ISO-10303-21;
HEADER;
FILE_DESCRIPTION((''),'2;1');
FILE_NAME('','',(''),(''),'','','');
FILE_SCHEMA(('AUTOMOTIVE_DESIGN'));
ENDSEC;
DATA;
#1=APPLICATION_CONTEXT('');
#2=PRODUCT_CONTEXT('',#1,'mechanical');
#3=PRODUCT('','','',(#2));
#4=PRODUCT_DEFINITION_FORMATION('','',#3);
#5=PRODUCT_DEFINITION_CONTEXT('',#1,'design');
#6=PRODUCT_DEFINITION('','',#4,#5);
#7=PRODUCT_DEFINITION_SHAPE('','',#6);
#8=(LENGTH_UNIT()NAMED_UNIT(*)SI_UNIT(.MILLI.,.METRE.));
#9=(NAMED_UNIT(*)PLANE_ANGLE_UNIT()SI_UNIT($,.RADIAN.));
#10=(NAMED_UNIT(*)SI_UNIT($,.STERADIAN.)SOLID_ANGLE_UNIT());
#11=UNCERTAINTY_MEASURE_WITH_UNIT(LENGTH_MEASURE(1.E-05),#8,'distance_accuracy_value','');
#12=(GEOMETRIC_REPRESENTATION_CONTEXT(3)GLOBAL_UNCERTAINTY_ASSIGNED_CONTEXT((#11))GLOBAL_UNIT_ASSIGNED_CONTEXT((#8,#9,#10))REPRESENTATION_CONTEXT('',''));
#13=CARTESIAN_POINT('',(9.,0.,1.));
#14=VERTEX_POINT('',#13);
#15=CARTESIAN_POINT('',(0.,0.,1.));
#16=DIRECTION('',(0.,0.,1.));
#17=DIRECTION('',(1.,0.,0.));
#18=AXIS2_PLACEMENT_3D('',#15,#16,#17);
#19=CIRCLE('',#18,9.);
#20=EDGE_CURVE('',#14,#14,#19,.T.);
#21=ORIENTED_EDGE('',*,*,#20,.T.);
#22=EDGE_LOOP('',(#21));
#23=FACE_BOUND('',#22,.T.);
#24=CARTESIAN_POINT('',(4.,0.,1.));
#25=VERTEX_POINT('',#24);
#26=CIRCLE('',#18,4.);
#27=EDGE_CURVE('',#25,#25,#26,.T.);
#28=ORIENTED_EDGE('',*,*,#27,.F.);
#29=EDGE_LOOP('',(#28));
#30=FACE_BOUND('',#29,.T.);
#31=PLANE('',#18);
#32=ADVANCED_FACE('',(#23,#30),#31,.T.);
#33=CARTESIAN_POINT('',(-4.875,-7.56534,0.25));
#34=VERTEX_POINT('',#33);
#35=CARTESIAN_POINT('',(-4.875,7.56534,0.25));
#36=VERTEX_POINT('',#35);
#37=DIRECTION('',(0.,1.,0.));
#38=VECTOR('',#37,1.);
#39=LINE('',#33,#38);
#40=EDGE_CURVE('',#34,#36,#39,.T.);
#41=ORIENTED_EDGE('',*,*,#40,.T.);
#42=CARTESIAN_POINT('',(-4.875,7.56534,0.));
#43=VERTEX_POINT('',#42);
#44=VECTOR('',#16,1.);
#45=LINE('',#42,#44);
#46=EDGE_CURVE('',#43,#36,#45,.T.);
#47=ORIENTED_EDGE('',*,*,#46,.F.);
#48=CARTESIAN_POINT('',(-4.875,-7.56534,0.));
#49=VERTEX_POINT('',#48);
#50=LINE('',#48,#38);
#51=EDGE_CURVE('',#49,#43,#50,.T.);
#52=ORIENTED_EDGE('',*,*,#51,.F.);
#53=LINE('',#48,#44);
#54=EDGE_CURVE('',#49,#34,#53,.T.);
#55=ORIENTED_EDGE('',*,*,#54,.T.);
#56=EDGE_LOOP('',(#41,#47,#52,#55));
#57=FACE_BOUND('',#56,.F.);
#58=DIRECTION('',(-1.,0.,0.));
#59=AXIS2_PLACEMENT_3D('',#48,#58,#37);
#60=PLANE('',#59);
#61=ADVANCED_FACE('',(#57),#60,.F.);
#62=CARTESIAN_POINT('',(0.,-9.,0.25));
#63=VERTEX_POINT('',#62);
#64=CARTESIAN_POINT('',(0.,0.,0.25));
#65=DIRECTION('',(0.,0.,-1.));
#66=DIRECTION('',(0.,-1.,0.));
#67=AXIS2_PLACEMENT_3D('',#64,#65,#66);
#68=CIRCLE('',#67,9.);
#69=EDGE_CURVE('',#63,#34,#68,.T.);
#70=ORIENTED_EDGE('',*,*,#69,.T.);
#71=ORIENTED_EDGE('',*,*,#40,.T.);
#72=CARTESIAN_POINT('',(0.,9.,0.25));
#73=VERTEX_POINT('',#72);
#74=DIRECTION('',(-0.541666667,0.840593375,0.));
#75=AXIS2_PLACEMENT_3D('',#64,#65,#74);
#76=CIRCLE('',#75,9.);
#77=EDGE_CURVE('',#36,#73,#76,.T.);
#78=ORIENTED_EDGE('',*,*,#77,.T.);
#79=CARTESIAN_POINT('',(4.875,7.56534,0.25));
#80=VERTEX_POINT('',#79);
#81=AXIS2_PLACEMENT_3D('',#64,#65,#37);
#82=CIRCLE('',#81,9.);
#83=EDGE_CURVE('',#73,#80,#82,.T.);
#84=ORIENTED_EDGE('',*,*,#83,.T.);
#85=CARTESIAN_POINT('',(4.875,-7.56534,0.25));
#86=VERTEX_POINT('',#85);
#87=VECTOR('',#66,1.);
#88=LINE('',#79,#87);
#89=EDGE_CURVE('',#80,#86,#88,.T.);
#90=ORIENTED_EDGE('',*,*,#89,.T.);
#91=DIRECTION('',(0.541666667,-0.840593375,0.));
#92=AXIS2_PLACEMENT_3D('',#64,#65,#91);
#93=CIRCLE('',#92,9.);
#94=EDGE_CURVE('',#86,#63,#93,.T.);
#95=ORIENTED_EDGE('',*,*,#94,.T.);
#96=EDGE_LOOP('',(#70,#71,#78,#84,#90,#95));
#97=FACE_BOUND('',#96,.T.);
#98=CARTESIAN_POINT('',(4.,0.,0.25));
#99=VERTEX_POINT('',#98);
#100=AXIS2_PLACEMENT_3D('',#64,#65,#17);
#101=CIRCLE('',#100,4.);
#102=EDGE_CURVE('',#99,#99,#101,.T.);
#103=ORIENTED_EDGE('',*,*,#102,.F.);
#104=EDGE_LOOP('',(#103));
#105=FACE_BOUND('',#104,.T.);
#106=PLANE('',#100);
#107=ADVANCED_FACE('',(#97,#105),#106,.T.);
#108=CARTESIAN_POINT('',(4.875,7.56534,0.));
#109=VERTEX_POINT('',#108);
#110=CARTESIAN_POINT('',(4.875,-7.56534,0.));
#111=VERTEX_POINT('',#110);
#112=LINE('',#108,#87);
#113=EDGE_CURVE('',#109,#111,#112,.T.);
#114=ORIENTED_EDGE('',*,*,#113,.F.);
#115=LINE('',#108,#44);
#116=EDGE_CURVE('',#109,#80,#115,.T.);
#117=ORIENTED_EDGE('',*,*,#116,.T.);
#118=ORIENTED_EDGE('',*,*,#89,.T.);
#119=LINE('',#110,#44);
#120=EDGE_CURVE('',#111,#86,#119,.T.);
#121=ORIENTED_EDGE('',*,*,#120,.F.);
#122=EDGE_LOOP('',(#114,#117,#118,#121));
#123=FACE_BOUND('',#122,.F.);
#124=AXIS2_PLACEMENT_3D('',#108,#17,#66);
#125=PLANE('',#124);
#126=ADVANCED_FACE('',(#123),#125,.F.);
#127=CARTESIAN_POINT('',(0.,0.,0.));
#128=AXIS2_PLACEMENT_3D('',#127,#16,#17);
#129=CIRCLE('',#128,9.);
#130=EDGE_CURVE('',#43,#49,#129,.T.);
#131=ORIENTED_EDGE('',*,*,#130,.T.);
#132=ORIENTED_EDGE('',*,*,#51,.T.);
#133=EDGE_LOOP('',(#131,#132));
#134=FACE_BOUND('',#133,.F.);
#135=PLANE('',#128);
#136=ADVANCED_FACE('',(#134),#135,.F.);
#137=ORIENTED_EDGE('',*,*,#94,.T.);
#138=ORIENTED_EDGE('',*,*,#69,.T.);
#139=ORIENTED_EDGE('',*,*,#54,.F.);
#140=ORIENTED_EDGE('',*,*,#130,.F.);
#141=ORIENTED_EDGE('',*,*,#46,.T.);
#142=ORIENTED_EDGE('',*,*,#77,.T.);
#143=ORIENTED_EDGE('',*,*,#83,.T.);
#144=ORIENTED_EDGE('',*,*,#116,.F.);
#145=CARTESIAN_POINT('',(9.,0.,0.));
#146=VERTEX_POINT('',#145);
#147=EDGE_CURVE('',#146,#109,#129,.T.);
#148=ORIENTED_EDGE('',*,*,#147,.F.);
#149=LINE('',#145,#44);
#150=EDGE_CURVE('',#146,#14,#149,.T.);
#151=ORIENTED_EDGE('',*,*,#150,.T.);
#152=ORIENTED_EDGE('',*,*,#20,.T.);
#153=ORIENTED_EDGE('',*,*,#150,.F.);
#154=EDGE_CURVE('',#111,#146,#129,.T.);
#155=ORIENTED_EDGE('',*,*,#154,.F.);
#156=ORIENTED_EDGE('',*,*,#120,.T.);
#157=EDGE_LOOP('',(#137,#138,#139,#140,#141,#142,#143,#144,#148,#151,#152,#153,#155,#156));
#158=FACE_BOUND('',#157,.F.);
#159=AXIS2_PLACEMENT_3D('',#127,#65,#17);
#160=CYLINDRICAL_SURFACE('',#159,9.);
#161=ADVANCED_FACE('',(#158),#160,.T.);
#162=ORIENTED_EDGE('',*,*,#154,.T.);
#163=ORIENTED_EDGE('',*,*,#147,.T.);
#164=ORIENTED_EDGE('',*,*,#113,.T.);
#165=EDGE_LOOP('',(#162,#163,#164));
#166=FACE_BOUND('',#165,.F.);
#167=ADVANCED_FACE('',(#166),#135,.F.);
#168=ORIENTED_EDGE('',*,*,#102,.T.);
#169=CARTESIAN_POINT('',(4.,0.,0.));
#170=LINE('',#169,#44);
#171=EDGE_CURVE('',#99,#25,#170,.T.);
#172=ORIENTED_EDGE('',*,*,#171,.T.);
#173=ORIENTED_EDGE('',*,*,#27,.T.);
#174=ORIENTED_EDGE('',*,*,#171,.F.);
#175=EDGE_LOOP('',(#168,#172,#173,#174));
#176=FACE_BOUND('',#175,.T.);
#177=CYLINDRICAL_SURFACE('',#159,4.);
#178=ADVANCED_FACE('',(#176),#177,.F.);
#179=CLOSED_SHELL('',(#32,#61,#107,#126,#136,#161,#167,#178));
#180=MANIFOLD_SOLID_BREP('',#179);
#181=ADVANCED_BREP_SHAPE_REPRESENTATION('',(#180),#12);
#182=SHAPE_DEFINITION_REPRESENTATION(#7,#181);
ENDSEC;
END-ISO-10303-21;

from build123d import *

# Parameters (mm, degrees)
F0_R     = 9
F0_R_2   = 4
F1_DEPTH = 1
F2_R     = 4
F3_DEPTH = 0.25


with BuildPart() as f1:
    # F0 (on Top) → F1 (new body)
    with BuildSketch(Plane.XY):
        Circle(F0_R)
        Circle(F0_R_2, mode=Mode.SUBTRACT)
    extrude(amount=F1_DEPTH)

    # F2 (on face) → F3 (cut)
    with BuildSketch(Plane(origin=(0, 0, 0), x_dir=(1, 0, 0), z_dir=(0, 0, -1))):
        with BuildLine():
            ThreePointArc((4.875, 7.5653403757), (2.5408597579, 8.6338885614), (0, 9))
            ThreePointArc((0, 9), (-2.5408597579, 8.6338885614), (-4.875, 7.5653403757))
            Line((-4.875, 7.5653403757), (-4.875, -7.5653403757))
            ThreePointArc((-4.875, -7.5653403757), (-2.5408597579, -8.6338885614), (0, -9))
            ThreePointArc((0, -9), (2.5408597579, -8.6338885614), (4.875, -7.5653403757))
            Line((4.875, -7.5653403757), (4.875, 7.5653403757))
        make_face()
        Circle(F2_R, mode=Mode.SUBTRACT)
        Circle(F2_R)
    extrude(amount=-F3_DEPTH, mode=Mode.SUBTRACT)


solid = f1.part
